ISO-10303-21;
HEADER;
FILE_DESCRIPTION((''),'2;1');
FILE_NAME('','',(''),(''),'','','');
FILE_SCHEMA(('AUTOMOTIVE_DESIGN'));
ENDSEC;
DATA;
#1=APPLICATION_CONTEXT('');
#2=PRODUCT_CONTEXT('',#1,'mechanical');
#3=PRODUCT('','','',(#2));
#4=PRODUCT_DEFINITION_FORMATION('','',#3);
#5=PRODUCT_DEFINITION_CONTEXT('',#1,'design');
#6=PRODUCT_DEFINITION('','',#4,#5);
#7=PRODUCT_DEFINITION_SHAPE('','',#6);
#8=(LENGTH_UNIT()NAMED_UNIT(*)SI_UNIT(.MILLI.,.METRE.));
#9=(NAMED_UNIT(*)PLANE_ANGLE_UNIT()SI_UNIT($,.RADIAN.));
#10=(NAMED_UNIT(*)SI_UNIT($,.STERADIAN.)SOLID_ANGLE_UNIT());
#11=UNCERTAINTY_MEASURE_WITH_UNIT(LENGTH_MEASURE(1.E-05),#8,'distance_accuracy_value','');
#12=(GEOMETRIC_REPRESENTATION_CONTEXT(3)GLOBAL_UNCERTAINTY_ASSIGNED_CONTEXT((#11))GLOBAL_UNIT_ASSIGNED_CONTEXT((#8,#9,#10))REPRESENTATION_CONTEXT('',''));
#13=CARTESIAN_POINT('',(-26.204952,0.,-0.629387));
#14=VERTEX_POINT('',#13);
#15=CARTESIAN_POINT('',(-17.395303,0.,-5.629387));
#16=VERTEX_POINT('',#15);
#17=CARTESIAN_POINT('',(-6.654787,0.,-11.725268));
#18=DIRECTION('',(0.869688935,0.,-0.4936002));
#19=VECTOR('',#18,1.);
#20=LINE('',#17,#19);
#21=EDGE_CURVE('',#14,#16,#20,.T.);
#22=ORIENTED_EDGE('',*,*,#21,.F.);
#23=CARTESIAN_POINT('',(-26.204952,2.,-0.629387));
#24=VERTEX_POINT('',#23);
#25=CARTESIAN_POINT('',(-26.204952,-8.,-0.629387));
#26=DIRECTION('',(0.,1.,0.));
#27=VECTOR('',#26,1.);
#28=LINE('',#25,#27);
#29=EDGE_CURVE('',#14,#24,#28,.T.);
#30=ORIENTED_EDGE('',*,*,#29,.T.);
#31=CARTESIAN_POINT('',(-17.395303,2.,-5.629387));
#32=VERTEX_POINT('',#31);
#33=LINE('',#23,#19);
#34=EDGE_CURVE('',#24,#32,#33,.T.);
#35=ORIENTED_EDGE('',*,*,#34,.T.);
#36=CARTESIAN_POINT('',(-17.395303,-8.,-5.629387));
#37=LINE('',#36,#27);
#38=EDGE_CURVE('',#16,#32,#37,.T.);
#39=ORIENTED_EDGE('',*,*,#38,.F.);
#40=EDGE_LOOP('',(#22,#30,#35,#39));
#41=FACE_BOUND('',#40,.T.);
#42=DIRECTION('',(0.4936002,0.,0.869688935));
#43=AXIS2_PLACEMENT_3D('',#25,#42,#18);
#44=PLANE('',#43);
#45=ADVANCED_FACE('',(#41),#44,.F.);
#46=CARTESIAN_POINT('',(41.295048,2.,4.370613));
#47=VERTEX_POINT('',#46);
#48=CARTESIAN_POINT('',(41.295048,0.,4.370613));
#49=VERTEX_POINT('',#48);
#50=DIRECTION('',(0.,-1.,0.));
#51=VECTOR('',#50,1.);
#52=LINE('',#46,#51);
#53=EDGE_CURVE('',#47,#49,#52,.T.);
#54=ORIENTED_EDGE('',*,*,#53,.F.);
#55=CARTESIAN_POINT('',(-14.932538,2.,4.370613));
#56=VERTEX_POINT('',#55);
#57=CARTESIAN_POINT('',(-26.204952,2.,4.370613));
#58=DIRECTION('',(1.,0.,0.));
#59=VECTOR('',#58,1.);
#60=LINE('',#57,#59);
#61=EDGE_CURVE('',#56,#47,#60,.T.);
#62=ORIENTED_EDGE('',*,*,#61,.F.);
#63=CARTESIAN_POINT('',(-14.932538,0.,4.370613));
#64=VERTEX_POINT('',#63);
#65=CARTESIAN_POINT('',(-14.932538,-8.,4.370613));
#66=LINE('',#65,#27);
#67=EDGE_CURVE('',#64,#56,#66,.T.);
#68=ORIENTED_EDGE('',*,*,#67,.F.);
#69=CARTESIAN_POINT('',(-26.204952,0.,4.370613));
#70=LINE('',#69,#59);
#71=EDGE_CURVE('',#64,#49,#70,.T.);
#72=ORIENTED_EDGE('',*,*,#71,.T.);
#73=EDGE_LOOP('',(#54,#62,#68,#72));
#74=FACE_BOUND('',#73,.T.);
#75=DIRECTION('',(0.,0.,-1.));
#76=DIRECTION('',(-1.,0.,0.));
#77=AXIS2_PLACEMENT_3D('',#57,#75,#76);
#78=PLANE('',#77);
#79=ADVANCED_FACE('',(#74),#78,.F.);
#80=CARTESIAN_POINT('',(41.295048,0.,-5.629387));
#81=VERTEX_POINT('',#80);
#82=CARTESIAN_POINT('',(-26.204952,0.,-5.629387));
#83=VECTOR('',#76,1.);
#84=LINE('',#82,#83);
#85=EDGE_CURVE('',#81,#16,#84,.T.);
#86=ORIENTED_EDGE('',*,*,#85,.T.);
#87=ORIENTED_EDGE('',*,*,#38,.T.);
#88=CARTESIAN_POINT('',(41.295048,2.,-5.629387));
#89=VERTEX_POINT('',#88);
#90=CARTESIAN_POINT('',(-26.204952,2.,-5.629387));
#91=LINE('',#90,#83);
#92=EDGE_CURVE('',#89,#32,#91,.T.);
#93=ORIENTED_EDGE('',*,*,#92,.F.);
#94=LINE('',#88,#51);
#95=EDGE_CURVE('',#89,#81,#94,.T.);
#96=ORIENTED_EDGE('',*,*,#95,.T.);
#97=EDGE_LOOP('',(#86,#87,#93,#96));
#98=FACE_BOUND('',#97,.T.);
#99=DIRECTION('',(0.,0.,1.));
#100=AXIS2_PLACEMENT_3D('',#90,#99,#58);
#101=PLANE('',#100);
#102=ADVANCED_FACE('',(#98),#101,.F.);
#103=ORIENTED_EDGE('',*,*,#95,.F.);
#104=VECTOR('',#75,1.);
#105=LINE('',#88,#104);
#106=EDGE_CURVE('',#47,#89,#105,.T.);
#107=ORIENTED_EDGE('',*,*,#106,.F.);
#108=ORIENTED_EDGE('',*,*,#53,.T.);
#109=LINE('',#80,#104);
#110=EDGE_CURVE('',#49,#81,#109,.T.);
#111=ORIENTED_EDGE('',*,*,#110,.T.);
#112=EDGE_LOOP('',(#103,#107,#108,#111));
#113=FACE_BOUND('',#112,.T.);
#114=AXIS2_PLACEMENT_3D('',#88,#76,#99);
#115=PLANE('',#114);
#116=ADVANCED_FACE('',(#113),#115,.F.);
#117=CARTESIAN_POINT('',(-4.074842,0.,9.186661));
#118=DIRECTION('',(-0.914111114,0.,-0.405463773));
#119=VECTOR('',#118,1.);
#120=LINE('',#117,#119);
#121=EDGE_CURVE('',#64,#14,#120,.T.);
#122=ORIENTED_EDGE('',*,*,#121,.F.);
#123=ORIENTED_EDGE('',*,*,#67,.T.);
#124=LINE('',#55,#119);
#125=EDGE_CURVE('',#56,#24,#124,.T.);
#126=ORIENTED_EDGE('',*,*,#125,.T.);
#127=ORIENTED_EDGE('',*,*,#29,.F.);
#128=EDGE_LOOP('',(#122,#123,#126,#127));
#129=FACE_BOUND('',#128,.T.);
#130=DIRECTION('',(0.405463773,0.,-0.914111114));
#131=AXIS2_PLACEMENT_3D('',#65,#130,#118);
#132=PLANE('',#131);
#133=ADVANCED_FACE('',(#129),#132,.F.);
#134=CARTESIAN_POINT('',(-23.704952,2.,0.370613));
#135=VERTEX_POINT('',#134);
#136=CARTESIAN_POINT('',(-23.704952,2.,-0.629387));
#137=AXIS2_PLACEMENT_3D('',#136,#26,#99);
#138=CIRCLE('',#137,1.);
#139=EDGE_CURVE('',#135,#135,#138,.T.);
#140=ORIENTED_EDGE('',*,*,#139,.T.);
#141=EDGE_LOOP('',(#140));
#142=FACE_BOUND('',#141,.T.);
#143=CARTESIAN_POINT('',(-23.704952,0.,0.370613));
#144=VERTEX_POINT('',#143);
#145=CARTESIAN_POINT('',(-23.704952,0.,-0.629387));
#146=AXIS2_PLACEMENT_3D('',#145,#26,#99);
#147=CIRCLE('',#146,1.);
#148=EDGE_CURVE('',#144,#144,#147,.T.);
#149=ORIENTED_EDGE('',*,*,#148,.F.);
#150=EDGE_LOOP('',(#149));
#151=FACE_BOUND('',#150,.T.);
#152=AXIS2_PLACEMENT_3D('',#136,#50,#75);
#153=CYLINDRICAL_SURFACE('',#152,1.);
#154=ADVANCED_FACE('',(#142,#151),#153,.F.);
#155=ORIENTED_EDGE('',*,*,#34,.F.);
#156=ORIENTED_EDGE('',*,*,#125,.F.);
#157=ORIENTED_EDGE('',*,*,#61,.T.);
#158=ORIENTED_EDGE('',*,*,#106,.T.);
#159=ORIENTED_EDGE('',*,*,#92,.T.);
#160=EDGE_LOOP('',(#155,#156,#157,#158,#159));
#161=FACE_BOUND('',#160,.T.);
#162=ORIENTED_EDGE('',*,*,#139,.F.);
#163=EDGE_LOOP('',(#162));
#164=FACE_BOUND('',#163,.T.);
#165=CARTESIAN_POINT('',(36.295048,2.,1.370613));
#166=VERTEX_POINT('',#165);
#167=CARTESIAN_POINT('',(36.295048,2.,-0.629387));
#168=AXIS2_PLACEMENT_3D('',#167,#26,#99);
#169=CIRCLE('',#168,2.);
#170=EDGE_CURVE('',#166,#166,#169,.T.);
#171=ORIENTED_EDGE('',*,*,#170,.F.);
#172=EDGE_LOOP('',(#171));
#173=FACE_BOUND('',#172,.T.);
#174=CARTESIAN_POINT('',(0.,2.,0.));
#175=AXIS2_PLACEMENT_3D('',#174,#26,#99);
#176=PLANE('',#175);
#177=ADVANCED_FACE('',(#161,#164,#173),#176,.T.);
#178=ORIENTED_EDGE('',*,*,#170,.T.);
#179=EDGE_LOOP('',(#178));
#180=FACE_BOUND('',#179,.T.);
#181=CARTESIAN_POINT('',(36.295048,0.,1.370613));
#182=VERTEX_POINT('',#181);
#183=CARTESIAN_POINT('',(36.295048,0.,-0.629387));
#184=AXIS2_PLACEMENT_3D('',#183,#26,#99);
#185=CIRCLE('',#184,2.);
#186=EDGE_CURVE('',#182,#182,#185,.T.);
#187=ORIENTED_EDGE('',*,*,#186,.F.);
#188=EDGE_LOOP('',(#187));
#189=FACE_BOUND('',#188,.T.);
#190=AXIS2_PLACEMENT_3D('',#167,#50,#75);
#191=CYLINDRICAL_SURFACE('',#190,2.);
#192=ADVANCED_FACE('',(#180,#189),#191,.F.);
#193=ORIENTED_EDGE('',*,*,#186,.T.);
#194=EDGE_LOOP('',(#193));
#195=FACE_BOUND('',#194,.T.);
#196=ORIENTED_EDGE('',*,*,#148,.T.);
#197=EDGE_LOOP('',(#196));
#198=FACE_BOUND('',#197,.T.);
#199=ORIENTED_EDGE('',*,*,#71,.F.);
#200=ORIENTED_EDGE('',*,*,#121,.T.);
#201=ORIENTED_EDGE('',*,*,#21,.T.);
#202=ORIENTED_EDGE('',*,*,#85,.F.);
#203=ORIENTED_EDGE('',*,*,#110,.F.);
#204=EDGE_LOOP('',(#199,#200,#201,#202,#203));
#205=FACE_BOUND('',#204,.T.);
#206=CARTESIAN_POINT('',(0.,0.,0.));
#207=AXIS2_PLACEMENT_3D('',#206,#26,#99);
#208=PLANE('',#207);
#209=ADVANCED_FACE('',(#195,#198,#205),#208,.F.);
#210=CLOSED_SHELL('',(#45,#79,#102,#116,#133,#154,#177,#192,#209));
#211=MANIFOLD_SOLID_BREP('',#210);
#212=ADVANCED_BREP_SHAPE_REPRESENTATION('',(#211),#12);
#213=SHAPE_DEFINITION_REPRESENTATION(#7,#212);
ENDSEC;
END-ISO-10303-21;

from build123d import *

# Parameters (mm, degrees)
SKETCH1_W           = 67.5
SKETCH1_H           = 10
SKETCH1_R           = 1
SKETCH1_R_2         = 2
BOSS_EXTRUDE1_DEPTH = 2
FILLET2_R           = 5
FILLET3_R           = 5
CUT_EXTRUDE1_DEPTH  = 10


with BuildPart() as part:
    # Sketch1 → Boss-Extrude1 (new body)
    with BuildSketch(Plane(origin=(0, 0, 0), x_dir=(1, 0, 0), z_dir=(0, 1, 0))):
        with Locations((7.54504806, 0.629386767)):
            Rectangle(SKETCH1_W, SKETCH1_H)
        with Locations(Location((-23.70495194, 0.629386767, 0), (0, 0, 270))):
            Circle(SKETCH1_R, mode=Mode.SUBTRACT)
        with Locations(Location((36.29504806, 0.629386767, 0), (0, 0, 270))):
            Circle(SKETCH1_R_2, mode=Mode.SUBTRACT)
    extrude(amount=BOSS_EXTRUDE1_DEPTH)

    # Fillet2
    fillet2_edges = [part.edges().sort_by_distance(p)[0] for p in [
        (-26.20495194, 1, -5.629386767),
    ]]
    fillet(fillet2_edges, radius=FILLET2_R)

    # Fillet3
    fillet3_edges = [part.edges().sort_by_distance(p)[0] for p in [
        (-26.20495194, 1, 4.370613233),
    ]]
    fillet(fillet3_edges, radius=FILLET3_R - 0.0001)  # a hair under: the kernel refuses the full size

    # Sketch2 → Cut-Extrude1 (cut)
    with BuildSketch(Plane(origin=(0, 2, 0), x_dir=(1, 0, 0), z_dir=(0, 1, 0))):
        Polygon((-26.20495194, 0.629386767), (-17.3953026, 5.629386767), (-30.276307772, 5.629386767), (-27.957364893, -6.288007195), (-14.932537807, -4.370613233), align=None)
    extrude(amount=-CUT_EXTRUDE1_DEPTH, mode=Mode.SUBTRACT)


solid = part.part
